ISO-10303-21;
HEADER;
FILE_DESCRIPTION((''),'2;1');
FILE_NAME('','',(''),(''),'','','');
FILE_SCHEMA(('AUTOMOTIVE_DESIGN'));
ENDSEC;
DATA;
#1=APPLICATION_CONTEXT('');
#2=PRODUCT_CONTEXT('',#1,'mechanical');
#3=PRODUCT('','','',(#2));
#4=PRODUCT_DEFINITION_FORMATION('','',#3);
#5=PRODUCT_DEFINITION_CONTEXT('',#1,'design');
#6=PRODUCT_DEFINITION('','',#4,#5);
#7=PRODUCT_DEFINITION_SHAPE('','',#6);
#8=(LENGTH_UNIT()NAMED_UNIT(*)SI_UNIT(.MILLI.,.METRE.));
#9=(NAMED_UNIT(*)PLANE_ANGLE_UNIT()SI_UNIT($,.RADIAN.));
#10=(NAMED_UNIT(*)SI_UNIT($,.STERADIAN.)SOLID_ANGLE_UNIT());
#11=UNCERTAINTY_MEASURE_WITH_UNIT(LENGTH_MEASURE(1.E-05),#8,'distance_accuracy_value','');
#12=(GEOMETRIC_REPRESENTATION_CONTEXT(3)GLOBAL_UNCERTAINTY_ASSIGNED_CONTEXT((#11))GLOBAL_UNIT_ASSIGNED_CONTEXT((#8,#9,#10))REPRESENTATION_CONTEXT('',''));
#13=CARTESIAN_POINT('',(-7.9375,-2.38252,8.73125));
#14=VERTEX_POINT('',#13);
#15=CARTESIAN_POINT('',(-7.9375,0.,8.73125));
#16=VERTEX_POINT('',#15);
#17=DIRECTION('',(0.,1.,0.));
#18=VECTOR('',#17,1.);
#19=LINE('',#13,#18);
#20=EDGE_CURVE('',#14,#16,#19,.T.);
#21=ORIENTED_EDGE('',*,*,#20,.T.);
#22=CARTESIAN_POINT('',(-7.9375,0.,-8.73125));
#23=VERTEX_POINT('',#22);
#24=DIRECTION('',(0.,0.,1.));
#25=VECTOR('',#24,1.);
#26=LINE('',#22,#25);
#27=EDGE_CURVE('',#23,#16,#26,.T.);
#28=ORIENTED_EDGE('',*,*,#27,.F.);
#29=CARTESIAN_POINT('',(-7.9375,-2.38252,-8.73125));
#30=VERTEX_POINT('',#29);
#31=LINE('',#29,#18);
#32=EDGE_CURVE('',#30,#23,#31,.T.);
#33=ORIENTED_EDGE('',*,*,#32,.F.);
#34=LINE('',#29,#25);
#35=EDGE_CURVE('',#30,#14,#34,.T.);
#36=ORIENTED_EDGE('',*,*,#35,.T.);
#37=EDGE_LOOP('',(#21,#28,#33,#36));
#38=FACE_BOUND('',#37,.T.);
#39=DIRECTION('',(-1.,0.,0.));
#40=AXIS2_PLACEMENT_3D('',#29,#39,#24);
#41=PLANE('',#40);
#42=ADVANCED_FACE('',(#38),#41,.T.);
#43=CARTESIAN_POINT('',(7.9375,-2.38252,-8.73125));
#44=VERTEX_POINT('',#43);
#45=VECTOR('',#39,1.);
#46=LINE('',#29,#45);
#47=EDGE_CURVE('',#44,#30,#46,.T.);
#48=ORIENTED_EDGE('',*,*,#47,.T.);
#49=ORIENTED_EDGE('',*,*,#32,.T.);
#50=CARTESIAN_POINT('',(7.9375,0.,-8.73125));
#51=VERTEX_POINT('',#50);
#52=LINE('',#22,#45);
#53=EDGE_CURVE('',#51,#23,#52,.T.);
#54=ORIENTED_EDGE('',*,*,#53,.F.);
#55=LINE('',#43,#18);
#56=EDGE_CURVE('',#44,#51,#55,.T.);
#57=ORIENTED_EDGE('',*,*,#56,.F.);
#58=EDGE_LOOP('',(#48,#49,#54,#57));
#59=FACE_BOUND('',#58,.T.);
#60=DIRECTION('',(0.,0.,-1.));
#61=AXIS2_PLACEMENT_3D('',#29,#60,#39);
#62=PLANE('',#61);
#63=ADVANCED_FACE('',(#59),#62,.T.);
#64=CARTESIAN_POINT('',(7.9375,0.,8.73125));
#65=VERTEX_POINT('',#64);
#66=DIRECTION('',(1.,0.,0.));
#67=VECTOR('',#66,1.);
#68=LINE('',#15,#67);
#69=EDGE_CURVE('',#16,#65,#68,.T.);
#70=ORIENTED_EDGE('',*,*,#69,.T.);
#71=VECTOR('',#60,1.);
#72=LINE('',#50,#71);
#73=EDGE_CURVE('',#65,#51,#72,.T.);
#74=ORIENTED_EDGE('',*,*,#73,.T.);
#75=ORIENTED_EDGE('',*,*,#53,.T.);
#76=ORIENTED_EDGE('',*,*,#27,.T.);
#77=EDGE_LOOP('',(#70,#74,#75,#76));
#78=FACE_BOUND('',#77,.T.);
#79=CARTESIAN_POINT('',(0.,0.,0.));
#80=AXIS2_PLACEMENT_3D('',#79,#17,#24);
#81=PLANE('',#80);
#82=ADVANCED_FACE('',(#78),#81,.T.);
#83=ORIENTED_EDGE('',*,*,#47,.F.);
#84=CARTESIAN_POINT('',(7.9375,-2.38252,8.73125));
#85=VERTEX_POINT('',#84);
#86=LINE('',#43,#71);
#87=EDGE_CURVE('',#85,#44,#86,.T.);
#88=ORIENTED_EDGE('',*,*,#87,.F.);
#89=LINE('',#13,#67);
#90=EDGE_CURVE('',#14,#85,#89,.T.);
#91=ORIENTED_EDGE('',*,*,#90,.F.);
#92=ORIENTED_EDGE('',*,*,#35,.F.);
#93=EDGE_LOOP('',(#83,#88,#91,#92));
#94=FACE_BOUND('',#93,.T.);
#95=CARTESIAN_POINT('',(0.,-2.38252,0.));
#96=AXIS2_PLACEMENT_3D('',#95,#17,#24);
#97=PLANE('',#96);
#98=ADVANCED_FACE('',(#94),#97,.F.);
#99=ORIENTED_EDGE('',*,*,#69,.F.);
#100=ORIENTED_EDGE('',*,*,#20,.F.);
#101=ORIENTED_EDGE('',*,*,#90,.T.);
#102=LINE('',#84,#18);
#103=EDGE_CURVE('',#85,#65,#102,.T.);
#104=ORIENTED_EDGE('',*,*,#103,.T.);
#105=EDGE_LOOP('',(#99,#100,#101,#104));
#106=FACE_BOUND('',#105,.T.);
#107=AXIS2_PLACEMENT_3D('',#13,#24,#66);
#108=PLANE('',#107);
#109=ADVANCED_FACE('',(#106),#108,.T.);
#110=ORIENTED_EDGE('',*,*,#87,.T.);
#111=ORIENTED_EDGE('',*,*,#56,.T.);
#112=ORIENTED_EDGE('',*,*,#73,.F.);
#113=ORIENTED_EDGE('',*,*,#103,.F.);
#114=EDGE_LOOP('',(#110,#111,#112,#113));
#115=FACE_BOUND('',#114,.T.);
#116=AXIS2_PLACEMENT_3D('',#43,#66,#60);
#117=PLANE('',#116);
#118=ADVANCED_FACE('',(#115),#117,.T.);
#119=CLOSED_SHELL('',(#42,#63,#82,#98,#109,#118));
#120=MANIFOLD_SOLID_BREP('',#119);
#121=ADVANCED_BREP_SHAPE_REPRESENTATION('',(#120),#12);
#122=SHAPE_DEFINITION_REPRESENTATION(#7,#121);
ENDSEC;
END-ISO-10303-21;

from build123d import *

# Parameters (mm, degrees)
SKETCH1_W          = 15.875
SKETCH1_H          = 17.4625
BASE_FLANGE1_DEPTH = 2.38252


# Sheet-metal steps are written as plain solids
with BuildPart() as part:
    # Sketch1 → Base-Flange1 (new body)
    with BuildSketch(Plane(origin=(0, 0, 0), x_dir=(1, 0, 0), z_dir=(0, 1, 0))):
        Rectangle(SKETCH1_W, SKETCH1_H)
    extrude(amount=-BASE_FLANGE1_DEPTH)


solid = part.part
